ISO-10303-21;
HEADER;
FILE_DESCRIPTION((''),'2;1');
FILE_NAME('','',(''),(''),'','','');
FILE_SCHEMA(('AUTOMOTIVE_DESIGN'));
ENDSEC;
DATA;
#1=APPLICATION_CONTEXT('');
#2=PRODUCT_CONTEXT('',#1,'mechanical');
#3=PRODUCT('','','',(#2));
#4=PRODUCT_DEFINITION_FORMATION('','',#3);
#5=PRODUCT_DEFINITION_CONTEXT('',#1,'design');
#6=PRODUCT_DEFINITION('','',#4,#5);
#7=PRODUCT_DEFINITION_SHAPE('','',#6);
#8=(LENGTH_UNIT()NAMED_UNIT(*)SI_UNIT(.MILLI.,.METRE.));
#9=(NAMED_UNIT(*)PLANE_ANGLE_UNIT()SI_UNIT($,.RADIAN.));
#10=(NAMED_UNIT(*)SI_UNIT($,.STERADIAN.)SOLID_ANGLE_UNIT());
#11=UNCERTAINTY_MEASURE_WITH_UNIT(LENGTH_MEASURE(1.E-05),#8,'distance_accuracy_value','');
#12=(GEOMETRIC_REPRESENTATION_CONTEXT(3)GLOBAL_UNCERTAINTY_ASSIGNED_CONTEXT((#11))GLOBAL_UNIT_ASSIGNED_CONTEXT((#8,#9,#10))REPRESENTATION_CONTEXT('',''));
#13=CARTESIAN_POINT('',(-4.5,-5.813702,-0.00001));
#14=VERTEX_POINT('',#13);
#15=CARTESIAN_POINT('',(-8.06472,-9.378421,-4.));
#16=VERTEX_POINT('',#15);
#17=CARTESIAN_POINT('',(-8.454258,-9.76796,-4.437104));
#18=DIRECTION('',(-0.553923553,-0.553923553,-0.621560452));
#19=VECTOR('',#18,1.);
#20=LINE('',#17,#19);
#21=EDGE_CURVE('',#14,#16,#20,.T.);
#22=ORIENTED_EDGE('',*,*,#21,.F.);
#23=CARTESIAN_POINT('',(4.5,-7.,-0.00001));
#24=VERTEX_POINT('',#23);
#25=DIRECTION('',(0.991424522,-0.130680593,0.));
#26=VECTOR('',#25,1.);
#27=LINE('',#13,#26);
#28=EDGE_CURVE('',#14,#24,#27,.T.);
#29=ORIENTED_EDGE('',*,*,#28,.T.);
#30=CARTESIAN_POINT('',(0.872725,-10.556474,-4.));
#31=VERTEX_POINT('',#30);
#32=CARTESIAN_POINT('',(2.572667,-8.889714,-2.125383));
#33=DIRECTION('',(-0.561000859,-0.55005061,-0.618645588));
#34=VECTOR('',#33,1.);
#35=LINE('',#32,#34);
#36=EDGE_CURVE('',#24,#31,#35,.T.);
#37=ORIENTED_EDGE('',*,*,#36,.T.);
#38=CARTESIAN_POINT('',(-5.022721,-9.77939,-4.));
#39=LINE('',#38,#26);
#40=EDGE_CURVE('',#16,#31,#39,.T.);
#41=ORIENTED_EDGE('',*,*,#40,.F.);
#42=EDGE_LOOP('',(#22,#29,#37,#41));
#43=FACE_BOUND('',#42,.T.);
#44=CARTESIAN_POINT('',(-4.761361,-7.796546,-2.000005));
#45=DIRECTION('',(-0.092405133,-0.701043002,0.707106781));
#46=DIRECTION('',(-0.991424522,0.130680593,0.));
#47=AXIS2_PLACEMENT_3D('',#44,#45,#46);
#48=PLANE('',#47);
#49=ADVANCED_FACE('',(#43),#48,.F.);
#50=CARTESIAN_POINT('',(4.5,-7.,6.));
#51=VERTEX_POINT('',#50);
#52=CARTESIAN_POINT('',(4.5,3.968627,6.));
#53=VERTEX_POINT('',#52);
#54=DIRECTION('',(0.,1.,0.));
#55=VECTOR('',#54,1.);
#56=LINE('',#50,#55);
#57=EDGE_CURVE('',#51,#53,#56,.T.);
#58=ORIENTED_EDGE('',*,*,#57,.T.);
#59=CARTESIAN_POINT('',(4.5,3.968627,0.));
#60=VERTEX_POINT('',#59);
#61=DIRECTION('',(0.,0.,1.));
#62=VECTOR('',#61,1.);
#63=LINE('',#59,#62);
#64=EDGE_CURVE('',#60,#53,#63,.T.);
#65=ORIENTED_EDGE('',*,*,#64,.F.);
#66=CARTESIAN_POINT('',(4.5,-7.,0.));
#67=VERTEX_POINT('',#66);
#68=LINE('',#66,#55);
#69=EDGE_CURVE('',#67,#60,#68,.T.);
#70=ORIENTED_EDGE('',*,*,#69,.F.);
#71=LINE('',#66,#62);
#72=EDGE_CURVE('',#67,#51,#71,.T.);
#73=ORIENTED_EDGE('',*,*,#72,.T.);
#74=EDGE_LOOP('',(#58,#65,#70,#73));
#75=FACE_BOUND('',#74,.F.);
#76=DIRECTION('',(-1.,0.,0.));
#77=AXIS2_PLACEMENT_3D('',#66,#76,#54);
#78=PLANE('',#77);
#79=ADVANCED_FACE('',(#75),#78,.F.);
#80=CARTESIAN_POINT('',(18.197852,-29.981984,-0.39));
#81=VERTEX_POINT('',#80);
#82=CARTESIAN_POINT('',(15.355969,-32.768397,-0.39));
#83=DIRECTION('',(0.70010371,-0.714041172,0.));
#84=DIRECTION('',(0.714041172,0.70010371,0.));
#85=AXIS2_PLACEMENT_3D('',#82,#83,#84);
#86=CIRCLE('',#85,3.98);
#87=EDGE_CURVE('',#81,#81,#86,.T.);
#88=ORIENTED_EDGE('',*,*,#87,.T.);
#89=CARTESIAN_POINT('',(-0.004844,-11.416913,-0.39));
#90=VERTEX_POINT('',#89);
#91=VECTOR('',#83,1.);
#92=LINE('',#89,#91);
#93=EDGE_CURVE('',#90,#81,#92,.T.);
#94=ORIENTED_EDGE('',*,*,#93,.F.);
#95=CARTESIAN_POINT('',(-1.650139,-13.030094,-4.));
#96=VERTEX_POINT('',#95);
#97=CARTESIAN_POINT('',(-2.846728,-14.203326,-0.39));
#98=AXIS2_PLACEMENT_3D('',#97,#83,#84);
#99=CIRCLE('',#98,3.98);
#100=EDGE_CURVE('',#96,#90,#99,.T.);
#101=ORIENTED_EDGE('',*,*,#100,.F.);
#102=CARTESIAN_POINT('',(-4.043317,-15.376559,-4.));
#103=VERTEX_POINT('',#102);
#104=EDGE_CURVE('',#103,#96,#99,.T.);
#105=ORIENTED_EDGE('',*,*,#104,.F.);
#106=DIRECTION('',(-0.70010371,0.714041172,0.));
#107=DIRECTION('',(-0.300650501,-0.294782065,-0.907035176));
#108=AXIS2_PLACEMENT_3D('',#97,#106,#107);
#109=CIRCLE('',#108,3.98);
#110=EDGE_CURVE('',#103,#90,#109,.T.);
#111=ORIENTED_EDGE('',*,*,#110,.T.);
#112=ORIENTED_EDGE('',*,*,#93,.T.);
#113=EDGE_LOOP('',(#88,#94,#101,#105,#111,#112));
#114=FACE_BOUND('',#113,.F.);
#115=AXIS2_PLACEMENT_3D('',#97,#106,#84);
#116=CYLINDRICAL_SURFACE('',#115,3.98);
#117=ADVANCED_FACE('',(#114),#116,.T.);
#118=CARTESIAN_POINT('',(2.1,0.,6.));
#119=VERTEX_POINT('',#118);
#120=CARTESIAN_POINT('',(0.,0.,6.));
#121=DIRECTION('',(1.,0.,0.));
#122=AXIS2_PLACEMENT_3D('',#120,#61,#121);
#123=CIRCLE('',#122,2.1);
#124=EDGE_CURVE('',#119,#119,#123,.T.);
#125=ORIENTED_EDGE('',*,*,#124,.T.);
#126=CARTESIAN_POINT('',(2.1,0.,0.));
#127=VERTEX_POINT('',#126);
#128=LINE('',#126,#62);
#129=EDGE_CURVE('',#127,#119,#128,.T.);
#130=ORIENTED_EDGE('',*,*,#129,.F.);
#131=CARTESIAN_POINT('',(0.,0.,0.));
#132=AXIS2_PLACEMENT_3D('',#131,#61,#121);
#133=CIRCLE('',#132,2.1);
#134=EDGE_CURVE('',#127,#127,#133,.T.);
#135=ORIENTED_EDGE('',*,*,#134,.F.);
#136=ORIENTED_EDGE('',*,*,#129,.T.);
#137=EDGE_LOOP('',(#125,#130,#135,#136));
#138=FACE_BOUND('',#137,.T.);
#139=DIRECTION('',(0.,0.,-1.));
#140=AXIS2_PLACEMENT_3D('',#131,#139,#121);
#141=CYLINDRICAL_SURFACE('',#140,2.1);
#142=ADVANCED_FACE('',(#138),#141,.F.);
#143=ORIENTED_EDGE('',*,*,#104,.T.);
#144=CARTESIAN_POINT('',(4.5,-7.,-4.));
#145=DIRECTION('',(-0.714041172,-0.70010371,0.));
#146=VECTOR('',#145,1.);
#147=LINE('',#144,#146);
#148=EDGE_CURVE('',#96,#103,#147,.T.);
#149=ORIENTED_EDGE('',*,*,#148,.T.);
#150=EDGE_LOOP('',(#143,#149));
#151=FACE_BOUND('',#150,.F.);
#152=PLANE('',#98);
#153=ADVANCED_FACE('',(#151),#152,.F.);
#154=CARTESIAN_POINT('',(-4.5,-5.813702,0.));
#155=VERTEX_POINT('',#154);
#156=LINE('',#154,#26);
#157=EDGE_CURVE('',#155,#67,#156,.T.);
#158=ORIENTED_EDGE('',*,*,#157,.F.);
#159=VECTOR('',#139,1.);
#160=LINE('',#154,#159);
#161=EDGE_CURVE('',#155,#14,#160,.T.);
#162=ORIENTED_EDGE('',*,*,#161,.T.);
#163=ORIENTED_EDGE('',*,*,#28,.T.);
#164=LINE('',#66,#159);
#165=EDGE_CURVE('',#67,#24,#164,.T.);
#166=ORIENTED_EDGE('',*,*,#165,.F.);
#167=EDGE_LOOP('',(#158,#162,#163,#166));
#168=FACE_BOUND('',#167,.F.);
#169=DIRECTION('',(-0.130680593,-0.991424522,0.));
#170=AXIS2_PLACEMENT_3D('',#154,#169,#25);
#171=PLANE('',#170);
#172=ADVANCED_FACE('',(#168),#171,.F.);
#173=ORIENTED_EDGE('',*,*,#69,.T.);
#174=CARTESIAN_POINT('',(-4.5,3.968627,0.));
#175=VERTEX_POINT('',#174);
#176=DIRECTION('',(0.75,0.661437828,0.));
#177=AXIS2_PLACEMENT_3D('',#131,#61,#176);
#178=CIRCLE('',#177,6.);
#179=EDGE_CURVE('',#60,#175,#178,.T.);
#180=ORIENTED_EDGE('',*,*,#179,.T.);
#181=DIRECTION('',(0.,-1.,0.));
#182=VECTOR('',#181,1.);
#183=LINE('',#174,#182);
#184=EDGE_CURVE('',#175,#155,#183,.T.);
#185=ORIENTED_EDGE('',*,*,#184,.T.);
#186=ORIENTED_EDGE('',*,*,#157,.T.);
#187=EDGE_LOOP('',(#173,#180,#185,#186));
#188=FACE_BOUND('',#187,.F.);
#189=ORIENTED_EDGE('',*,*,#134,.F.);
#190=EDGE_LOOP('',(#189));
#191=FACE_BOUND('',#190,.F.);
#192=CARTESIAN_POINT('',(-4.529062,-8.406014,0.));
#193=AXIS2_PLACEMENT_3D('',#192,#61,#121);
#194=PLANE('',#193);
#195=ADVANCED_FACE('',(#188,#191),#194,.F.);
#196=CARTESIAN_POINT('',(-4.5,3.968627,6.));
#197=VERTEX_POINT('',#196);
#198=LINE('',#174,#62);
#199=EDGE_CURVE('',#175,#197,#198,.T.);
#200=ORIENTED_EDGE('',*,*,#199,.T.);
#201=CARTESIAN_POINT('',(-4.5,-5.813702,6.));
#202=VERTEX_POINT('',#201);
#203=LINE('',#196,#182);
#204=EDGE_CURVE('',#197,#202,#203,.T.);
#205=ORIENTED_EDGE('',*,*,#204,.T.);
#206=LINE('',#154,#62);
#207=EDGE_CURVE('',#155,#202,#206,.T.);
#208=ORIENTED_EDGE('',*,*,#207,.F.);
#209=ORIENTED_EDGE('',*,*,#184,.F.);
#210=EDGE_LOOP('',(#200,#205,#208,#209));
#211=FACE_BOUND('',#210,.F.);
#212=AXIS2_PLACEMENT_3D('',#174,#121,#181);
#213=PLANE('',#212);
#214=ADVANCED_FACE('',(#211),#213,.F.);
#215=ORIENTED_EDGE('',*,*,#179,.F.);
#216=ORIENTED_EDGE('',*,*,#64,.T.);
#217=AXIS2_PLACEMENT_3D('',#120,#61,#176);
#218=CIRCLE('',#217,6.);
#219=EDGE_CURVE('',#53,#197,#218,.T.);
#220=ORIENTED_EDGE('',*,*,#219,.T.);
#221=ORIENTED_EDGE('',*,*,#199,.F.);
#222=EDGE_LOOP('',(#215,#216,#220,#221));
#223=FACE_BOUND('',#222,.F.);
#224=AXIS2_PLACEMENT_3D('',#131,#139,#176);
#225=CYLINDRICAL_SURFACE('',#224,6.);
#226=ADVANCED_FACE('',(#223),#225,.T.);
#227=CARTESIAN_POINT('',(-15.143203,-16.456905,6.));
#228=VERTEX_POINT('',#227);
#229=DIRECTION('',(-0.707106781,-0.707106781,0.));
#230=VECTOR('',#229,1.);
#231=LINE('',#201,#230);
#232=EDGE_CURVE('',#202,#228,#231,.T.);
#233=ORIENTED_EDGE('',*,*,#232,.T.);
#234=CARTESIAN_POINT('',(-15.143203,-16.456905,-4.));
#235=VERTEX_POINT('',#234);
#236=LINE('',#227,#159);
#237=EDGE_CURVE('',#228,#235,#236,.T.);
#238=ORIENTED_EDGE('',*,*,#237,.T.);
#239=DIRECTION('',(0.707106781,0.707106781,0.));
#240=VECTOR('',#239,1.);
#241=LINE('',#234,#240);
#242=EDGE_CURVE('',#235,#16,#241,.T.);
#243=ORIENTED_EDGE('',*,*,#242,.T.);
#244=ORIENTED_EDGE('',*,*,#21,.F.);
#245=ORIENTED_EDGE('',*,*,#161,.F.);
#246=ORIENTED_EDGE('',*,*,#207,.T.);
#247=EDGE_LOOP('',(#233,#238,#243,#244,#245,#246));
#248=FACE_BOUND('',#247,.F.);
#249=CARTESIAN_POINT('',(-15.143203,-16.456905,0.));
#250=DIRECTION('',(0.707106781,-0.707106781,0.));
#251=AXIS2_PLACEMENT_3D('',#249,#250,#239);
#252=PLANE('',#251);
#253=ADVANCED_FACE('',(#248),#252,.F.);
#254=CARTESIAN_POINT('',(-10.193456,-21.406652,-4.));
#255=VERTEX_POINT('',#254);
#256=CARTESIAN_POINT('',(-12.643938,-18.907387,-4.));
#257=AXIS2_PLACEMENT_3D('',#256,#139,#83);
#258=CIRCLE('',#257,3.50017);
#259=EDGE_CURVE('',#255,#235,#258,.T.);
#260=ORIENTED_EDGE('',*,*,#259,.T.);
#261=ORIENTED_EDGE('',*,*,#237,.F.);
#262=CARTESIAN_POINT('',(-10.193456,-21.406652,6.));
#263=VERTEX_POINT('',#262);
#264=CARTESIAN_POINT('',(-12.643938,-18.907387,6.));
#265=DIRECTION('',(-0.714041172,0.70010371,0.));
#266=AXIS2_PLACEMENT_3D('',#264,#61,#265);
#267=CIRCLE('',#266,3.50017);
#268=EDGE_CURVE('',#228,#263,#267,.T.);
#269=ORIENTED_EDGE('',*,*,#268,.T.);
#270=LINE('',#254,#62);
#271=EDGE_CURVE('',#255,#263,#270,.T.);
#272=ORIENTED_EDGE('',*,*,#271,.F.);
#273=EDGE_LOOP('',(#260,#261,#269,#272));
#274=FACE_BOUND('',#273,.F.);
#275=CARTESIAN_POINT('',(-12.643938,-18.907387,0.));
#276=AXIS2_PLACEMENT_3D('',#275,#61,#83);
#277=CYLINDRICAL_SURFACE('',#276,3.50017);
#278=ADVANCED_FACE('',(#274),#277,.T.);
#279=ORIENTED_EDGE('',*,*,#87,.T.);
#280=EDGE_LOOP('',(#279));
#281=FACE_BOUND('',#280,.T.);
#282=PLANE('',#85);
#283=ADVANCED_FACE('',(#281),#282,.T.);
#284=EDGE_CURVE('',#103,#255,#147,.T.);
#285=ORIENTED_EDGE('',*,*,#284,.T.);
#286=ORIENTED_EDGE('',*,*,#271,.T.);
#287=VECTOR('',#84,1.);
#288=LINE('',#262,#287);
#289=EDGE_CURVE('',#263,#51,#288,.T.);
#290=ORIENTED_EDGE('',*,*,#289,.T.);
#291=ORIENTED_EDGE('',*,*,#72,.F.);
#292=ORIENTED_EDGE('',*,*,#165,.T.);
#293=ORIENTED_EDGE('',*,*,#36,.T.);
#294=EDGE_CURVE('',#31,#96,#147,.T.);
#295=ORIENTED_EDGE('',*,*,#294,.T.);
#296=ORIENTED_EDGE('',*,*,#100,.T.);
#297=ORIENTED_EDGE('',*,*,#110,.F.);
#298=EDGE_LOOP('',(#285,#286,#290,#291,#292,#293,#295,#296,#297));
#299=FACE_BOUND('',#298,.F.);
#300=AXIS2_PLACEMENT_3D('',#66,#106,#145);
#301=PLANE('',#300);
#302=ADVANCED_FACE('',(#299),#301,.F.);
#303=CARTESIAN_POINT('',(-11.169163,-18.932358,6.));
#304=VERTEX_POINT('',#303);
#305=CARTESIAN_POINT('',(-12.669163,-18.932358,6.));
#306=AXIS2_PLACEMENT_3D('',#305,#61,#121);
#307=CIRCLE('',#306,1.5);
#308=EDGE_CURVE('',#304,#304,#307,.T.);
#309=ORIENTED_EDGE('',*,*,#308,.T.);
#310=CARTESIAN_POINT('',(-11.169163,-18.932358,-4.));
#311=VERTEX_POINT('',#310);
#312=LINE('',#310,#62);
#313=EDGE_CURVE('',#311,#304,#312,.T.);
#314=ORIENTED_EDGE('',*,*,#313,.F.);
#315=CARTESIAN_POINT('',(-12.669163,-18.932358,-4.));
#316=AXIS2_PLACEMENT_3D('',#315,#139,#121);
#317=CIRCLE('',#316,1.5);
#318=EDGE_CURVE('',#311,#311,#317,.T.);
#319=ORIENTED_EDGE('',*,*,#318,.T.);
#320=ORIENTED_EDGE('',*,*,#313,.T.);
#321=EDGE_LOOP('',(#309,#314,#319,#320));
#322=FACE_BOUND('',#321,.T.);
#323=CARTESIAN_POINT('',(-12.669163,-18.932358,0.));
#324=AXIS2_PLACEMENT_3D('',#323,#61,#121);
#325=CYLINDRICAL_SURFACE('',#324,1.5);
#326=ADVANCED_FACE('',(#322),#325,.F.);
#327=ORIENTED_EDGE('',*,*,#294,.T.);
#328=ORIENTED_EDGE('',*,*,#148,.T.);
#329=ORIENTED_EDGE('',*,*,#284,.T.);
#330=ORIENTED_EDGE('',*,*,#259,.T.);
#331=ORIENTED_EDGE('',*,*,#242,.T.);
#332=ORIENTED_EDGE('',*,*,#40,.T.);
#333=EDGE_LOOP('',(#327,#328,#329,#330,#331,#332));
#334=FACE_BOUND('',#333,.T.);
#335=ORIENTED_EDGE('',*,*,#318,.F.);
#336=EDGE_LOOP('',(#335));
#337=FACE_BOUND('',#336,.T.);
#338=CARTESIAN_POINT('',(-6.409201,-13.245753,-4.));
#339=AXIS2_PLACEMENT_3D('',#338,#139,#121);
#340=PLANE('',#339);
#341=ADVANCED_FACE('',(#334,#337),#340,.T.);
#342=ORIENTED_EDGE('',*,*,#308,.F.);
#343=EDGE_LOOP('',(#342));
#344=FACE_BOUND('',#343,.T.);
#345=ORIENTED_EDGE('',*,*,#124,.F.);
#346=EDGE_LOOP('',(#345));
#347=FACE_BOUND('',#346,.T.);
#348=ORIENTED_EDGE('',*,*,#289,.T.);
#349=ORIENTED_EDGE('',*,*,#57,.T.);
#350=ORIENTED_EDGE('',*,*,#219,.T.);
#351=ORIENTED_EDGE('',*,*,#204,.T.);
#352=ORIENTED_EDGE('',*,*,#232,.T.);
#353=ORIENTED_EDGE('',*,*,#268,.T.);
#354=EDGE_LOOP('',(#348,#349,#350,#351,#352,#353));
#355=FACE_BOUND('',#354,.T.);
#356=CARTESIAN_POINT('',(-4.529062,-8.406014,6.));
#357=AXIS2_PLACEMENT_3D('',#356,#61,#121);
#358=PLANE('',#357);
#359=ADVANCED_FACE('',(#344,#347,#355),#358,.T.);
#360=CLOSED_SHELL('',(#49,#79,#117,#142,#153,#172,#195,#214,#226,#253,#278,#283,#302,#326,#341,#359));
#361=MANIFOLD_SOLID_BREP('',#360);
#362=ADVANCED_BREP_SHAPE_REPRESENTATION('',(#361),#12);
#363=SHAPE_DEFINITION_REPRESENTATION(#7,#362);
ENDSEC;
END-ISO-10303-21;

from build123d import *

# Parameters (mm, degrees)
F0_R     = 1.5
F0_R_2   = 2.1
F1_DEPTH = 6
F2_R     = 3.98
F3_DEPTH = 26
F4_R     = 1.5
F5_DEPTH = 4
F6_SIZE  = 3.99999


# Not quite as in the source:
# - a fillet or chamfer is up to 0.001 mm smaller than in the source, because OpenCascade refuses the exact size


with BuildPart() as f1:
    # F0 (on Top) → F1 (new body)
    with BuildSketch(Plane.XY):
        with BuildLine():
            Line((4.5, 0), (4.5, 3.9686269666))
            ThreePointArc((4.5, 3.9686269666), (0, 6), (-4.5, 3.9686269666))
            Line((-4.5, 3.9686269666), (-4.5, 0))
            Line((-4.5, 0), (-4.5, -5.813701588))
            Line((-4.5, -5.813701588), (-15.143203234, -16.4569048219))
            ThreePointArc((-15.143203234, -16.4569048219), (-15.1189316865, -21.3823807428), (-10.1934557657, -21.4066522902))
            Line((-10.1934557657, -21.4066522902), (4.5, -7))
            Line((4.5, -7), (4.5, 0))
        make_face()
        with Locations((-12.6691633098, -18.9323580438)):
            Circle(F0_R, mode=Mode.SUBTRACT)
        Circle(F0_R_2, mode=Mode.SUBTRACT)
    extrude(amount=F1_DEPTH)

    # F2 (on face) → F3 (join)
    with BuildSketch(Plane(origin=(5.7049735344, -5.8185465008, 0), x_dir=(0.7140411723, 0.7001037097, 0), z_dir=(0.7001037097, -0.7140411723, 0))):
        with Locations((-11.9764822387, -0.39)):
            Circle(F2_R)
    extrude(amount=F3_DEPTH)

    # F4 (on face) → F5 (join)
    with BuildSketch(Plane(origin=(0, 0, 0), x_dir=(1, 0, 0), z_dir=(0, 0, -1))):
        with BuildLine():
            ThreePointArc((-10.1934557657, 21.4066522902), (-15.1189316865, 21.3823807428), (-15.143203234, 16.4569048219))
            Line((-15.143203234, 16.4569048219), (-4.5, 5.813701588))
            Line((-4.5, 5.813701588), (4.5, 7))
            Line((4.5, 7), (-10.1934557657, 21.4066522902))
        make_face()
        with Locations((-12.6691633098, 18.9323580438)):
            Circle(F4_R, mode=Mode.SUBTRACT)
    extrude(amount=F5_DEPTH)

    # F6 (size 4 in the source; OpenCascade refuses exactly that, so slightly less here)
    f6_edges = [f1.edges().sort_by_distance(p)[0] for p in [
        (0, -6.406851, -4),
    ]]
    chamfer(f6_edges, length=F6_SIZE)


solid = f1.part
